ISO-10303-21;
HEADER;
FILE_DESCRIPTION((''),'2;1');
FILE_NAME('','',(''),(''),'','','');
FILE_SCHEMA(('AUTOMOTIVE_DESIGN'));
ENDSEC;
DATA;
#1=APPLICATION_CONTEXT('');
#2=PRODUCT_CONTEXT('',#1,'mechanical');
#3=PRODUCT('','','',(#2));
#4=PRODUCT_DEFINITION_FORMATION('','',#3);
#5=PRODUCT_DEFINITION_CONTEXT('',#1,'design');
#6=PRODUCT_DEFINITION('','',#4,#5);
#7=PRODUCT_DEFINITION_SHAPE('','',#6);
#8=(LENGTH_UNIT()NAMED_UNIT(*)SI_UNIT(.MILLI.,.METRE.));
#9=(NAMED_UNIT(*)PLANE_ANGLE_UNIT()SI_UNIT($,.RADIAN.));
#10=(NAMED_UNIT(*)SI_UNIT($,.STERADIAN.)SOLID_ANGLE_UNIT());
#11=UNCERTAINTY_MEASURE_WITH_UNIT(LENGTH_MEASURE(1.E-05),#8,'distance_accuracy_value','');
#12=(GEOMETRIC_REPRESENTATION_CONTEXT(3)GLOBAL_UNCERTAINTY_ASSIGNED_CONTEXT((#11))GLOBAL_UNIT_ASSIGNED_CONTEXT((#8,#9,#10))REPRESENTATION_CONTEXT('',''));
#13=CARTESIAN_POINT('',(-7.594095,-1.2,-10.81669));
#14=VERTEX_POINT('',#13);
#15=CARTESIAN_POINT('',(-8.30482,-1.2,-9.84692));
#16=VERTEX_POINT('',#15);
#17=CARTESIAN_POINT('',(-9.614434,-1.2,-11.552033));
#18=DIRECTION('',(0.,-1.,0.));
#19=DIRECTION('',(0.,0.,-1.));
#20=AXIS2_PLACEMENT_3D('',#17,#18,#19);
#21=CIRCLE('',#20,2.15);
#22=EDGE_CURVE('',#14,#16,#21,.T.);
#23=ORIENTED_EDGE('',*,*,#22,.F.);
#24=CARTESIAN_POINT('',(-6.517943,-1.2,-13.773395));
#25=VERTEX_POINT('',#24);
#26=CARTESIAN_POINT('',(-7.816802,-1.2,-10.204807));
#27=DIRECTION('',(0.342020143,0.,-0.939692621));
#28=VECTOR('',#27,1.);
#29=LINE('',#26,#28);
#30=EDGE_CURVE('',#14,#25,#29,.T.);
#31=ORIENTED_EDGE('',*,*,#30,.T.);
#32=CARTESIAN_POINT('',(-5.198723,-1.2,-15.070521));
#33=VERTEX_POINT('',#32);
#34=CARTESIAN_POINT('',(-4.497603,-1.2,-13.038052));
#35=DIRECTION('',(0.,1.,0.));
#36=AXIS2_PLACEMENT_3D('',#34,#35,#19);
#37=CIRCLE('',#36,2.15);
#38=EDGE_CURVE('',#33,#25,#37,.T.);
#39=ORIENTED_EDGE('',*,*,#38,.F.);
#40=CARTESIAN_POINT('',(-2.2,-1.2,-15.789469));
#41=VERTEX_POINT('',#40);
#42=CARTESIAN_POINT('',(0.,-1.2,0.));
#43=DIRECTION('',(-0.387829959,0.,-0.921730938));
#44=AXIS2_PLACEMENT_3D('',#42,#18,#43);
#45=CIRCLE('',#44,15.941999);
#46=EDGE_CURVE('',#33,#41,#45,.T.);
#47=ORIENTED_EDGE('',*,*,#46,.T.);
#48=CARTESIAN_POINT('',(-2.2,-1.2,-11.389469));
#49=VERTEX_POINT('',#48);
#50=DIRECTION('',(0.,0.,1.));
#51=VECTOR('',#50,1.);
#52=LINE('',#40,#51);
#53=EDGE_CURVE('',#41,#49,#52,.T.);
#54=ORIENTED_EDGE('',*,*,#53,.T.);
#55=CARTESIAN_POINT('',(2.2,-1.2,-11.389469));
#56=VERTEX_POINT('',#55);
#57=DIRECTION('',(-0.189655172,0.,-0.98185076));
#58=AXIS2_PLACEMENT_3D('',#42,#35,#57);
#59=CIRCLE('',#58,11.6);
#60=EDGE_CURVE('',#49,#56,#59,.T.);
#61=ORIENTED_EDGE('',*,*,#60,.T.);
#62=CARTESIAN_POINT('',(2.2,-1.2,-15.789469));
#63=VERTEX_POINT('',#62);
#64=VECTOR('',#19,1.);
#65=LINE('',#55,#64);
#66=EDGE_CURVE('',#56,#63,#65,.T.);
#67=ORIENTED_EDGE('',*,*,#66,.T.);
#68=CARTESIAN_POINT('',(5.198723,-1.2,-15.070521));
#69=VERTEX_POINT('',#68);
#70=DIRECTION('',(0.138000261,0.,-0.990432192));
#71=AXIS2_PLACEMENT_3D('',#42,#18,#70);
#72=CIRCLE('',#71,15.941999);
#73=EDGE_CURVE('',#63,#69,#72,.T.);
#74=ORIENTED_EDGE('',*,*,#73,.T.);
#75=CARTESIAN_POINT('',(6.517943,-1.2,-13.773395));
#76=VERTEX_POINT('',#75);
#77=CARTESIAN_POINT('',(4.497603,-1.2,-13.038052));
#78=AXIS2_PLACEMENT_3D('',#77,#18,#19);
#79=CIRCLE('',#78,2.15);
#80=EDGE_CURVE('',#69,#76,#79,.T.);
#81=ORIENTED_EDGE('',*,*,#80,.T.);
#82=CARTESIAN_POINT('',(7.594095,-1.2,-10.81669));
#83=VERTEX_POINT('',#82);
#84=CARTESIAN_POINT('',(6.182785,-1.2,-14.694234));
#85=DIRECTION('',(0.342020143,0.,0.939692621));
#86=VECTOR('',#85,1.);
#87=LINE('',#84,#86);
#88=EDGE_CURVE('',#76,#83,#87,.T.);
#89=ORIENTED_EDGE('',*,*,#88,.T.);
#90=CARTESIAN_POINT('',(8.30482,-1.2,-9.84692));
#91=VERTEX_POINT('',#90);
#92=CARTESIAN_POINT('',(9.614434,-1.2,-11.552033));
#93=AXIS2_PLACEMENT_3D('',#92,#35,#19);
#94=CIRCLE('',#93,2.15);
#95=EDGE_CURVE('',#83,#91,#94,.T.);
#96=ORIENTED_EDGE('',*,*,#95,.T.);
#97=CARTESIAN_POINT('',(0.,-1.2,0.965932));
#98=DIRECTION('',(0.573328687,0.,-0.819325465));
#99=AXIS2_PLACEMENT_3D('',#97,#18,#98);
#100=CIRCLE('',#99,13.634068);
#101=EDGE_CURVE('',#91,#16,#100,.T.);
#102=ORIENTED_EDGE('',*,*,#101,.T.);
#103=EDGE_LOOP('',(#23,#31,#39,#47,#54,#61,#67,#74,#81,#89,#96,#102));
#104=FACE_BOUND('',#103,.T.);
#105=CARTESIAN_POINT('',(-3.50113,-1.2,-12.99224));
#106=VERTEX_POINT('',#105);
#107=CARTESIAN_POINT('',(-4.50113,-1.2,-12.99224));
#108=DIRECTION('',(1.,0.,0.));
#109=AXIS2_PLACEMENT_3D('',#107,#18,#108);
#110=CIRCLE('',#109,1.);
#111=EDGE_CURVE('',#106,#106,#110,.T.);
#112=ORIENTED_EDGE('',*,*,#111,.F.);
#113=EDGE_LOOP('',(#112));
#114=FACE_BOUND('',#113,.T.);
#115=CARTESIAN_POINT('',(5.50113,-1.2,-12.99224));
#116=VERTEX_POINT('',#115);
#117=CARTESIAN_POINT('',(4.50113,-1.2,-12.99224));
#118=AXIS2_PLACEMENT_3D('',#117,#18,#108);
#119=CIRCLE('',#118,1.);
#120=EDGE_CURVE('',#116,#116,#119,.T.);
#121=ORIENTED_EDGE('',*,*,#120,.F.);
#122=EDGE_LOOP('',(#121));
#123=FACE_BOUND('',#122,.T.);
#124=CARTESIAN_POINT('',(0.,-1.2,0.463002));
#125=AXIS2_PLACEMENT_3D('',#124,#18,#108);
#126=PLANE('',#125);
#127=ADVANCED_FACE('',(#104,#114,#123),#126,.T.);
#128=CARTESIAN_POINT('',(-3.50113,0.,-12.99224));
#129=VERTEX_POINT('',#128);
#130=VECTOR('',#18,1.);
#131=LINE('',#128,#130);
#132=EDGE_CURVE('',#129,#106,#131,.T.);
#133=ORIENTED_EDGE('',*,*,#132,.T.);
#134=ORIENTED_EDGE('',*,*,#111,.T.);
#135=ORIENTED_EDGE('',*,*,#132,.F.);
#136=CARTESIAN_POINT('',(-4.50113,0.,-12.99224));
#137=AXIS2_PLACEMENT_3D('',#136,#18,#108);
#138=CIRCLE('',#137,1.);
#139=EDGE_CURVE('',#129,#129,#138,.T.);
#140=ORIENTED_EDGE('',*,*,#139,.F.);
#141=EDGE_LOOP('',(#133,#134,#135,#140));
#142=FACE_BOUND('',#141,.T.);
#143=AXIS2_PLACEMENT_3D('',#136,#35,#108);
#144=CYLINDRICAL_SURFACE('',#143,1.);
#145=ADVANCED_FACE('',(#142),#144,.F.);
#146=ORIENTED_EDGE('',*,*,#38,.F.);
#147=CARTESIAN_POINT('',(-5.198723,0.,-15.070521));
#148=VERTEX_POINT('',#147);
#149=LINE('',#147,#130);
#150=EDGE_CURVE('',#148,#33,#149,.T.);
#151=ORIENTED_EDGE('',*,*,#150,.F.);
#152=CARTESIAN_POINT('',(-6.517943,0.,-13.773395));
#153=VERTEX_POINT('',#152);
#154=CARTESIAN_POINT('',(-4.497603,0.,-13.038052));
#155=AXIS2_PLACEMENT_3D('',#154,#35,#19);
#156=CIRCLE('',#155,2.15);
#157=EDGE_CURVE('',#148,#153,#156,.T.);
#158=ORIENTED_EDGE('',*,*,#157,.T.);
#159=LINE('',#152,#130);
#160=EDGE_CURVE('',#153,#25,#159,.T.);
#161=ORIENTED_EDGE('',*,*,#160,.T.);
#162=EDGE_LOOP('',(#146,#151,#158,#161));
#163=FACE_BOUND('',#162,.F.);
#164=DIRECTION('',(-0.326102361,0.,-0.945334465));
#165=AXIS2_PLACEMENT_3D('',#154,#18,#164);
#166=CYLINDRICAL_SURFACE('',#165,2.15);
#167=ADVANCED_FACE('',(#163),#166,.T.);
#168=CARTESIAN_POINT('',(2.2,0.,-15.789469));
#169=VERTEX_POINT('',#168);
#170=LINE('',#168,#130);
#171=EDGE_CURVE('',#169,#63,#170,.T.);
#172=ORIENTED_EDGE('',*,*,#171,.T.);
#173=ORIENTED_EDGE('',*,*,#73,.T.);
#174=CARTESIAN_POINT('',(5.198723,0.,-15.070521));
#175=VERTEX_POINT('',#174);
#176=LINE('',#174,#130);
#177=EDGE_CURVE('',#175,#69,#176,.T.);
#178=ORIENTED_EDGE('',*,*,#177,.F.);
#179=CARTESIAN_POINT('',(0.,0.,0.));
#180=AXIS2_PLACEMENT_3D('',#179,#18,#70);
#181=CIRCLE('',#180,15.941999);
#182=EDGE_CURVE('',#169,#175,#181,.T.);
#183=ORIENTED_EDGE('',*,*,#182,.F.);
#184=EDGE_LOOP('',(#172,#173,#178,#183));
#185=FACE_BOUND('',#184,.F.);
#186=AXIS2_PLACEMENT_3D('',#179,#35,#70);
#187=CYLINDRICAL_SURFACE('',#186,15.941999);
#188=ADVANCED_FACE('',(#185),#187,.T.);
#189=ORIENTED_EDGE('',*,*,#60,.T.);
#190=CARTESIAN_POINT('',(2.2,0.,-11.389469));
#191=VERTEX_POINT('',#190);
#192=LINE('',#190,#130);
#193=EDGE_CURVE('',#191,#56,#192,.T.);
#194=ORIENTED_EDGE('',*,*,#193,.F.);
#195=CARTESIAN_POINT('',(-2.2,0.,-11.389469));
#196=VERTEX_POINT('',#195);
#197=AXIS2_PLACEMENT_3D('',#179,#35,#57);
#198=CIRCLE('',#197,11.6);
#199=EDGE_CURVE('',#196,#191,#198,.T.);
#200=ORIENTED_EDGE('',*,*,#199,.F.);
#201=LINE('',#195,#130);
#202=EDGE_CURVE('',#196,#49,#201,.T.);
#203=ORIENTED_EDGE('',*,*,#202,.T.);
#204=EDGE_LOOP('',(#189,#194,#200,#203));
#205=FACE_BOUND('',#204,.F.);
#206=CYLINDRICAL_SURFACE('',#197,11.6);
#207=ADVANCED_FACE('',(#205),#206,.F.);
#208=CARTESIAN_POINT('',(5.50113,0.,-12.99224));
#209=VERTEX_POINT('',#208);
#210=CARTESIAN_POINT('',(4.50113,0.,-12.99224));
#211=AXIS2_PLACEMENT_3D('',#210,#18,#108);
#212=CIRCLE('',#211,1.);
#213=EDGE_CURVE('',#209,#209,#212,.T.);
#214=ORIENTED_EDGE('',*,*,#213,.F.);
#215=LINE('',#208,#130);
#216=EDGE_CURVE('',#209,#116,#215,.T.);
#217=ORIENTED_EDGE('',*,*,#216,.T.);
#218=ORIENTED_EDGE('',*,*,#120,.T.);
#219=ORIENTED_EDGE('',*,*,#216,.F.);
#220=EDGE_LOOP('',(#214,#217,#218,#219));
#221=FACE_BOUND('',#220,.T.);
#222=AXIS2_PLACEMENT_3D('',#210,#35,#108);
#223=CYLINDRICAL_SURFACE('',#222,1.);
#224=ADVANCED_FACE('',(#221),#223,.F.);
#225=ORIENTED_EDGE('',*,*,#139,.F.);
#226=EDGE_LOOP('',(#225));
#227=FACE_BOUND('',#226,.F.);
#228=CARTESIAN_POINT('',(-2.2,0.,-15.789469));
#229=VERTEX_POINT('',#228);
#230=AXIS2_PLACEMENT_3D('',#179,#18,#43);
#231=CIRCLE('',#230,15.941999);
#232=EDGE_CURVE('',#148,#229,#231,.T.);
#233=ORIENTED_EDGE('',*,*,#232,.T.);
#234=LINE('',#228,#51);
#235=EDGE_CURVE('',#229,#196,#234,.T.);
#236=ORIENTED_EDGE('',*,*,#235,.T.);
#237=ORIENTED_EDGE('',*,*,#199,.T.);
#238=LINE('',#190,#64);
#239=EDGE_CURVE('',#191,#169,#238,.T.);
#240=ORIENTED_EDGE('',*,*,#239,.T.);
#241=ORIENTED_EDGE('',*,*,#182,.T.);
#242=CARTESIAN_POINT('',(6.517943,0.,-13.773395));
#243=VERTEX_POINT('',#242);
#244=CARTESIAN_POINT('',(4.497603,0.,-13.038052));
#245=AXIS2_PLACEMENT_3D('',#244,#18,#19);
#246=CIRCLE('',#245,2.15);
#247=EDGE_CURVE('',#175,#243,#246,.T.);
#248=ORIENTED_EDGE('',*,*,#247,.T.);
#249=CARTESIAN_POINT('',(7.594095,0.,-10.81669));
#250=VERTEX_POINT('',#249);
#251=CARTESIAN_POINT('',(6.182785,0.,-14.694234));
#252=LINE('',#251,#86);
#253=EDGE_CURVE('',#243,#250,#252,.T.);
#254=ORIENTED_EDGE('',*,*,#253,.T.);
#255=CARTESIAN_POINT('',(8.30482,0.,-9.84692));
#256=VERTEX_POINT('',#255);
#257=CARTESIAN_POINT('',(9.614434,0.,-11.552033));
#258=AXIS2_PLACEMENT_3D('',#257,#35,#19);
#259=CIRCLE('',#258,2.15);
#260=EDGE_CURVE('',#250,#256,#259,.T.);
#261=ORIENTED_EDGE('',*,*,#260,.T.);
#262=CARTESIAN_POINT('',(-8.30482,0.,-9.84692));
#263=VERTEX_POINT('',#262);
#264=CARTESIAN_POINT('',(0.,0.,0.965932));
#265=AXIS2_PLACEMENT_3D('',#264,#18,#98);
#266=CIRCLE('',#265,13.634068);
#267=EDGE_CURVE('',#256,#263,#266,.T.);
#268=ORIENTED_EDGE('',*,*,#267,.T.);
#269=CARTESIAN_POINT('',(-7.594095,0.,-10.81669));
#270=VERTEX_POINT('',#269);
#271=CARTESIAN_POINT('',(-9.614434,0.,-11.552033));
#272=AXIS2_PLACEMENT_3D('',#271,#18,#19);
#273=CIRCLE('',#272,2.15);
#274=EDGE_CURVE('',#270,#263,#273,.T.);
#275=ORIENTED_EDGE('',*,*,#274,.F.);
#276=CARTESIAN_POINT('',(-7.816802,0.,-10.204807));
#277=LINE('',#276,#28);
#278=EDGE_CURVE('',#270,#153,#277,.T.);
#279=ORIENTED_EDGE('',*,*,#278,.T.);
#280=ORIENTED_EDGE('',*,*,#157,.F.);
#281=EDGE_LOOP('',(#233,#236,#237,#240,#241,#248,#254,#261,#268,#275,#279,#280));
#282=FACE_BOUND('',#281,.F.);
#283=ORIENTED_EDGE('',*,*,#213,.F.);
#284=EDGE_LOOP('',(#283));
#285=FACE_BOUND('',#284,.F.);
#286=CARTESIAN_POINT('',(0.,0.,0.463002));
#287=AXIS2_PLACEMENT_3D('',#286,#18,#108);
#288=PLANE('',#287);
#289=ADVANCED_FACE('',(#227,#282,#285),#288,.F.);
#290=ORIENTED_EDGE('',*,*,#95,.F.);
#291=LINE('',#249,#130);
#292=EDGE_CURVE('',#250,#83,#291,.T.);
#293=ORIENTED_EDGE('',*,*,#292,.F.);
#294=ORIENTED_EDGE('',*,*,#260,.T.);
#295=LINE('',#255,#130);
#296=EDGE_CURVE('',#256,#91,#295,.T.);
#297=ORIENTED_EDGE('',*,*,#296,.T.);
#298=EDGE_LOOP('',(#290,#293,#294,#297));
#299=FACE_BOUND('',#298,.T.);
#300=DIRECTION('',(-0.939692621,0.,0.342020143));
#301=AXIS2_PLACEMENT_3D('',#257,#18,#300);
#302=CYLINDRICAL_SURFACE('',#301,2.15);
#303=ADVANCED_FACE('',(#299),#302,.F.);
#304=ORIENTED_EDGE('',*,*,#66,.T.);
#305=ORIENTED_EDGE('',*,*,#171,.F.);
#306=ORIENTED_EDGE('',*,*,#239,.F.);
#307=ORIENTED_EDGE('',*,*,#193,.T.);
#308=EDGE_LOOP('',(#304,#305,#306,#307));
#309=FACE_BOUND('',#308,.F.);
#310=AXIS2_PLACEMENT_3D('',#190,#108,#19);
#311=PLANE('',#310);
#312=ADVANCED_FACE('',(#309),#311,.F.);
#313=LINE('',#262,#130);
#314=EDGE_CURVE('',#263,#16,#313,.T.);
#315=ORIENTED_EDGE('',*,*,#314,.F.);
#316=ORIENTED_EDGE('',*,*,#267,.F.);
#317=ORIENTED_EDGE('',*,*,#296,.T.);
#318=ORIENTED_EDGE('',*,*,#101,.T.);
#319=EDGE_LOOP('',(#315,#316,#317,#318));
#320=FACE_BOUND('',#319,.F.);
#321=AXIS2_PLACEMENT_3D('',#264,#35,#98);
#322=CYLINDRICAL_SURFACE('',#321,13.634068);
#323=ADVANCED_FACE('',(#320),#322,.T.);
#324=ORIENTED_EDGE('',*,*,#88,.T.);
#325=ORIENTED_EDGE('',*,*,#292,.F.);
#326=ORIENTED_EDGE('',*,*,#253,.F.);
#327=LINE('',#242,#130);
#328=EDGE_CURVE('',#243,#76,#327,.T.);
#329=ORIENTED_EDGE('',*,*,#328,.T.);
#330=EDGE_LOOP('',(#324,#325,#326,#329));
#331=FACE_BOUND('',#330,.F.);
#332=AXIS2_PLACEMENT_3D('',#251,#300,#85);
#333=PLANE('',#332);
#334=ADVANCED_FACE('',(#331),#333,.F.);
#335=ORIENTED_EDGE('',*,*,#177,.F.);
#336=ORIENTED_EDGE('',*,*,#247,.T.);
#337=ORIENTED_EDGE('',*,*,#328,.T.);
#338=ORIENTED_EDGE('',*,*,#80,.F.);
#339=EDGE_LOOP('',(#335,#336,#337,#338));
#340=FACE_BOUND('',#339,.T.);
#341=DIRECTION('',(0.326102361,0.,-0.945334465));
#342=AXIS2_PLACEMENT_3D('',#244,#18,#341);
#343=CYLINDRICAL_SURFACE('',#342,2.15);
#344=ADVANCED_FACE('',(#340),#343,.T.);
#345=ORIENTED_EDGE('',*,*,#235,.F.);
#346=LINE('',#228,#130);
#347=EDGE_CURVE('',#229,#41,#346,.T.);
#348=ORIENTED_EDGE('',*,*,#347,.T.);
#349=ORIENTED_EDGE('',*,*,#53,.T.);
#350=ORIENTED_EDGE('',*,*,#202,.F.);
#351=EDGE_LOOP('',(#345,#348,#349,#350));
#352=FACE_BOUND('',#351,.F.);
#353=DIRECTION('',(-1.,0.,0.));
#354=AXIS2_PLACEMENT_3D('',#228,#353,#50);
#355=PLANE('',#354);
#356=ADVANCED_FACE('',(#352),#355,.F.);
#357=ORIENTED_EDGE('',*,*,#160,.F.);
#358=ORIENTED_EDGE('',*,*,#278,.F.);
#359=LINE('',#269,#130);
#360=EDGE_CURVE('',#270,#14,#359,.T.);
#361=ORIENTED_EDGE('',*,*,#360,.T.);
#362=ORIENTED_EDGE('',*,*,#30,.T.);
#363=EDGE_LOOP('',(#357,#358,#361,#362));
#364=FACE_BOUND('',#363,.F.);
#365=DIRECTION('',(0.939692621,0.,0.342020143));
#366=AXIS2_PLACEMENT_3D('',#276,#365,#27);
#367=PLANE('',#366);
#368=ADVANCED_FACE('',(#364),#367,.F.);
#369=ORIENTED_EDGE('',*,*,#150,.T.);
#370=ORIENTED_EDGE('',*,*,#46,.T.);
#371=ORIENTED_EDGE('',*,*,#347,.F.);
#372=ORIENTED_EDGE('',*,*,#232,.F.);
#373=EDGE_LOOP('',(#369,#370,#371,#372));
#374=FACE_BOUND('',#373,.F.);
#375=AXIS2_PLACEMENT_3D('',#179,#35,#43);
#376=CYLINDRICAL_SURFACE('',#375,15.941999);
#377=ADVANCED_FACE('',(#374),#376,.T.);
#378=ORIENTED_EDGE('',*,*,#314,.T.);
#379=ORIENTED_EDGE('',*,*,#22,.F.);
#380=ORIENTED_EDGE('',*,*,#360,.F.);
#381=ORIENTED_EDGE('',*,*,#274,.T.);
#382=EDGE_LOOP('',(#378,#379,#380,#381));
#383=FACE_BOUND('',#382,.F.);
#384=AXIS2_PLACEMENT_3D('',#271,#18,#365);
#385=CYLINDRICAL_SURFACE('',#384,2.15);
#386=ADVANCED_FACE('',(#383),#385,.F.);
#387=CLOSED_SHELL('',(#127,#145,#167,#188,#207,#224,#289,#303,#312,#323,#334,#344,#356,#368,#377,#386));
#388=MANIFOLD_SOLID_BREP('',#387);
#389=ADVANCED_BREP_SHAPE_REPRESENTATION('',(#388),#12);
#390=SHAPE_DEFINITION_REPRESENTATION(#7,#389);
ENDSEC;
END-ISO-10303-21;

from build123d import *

# Parameters (mm, degrees)
F0_R     = 1
F1_DEPTH = 1.2
F2_R     = 2.15


# Not quite as in the source:
# - a feature names something its author has since deleted; it is built from what else it names


with BuildPart() as f1:
    # F0 (on Front) → F1 (new body)
    with BuildSketch(Plane.XZ):
        with BuildLine():
            ThreePointArc((-2.2, -11.3894688199), (0, 11.6), (2.2, -11.3894688199))
            Line((2.2, -11.3894688199), (2.2, -12.4894688199))
            ThreePointArc((2.2, -12.4894688199), (5.1370226671, -11.6633518005), (7.8168023095, -10.2048071338))
            ThreePointArc((7.8168023095, -10.2048071338), (0, 14.6), (-7.8168023095, -10.2048071338))
            ThreePointArc((-7.8168023095, -10.2048071338), (-5.1370226671, -11.6633518005), (-2.2, -12.4894688199))
            Line((-2.2, -12.4894688199), (-2.2, -11.3894688199))
        make_face()
        with BuildLine():
            ThreePointArc((7.8168023095, -10.2048071338), (5.1370226671, -11.6633518005), (2.2, -12.4894688199))
            Line((2.2, -12.4894688199), (2.2, -15.7894688199))
            ThreePointArc((2.2, -15.7894688199), (4.2270149149, -15.3713913009), (6.1827847392, -14.6942335113))
            Line((6.1827847392, -14.6942335113), (7.8168023095, -10.2048071338))
        make_face()
        with Locations((4.5011299048, -12.9922397434)):
            Circle(F0_R, mode=Mode.SUBTRACT)
        with BuildLine():
            Line((-2.2, -15.7894688199), (-2.2, -12.4894688199))
            ThreePointArc((-2.2, -12.4894688199), (-5.1370226671, -11.6633518005), (-7.8168023095, -10.2048071338))
            Line((-7.8168023095, -10.2048071338), (-6.1827847392, -14.6942335113))
            ThreePointArc((-6.1827847392, -14.6942335113), (-4.2270149149, -15.3713913009), (-2.2, -15.7894688199))
        make_face()
        with Locations((-4.5011299048, -12.9922397434)):
            Circle(F0_R, mode=Mode.SUBTRACT)
    extrude(amount=F1_DEPTH)

    # F2
    f2_edges = [f1.edges().sort_by_distance(p)[0] for p in [
        (6.182785, -0.6, -14.694234),
        (-6.182785, -0.6, -14.694234),
        (-7.816802, -0.6, -10.204807),
        (7.816802, -0.6, -10.204807),
    ]]
    fillet(f2_edges, radius=F2_R)


solid = f1.part
